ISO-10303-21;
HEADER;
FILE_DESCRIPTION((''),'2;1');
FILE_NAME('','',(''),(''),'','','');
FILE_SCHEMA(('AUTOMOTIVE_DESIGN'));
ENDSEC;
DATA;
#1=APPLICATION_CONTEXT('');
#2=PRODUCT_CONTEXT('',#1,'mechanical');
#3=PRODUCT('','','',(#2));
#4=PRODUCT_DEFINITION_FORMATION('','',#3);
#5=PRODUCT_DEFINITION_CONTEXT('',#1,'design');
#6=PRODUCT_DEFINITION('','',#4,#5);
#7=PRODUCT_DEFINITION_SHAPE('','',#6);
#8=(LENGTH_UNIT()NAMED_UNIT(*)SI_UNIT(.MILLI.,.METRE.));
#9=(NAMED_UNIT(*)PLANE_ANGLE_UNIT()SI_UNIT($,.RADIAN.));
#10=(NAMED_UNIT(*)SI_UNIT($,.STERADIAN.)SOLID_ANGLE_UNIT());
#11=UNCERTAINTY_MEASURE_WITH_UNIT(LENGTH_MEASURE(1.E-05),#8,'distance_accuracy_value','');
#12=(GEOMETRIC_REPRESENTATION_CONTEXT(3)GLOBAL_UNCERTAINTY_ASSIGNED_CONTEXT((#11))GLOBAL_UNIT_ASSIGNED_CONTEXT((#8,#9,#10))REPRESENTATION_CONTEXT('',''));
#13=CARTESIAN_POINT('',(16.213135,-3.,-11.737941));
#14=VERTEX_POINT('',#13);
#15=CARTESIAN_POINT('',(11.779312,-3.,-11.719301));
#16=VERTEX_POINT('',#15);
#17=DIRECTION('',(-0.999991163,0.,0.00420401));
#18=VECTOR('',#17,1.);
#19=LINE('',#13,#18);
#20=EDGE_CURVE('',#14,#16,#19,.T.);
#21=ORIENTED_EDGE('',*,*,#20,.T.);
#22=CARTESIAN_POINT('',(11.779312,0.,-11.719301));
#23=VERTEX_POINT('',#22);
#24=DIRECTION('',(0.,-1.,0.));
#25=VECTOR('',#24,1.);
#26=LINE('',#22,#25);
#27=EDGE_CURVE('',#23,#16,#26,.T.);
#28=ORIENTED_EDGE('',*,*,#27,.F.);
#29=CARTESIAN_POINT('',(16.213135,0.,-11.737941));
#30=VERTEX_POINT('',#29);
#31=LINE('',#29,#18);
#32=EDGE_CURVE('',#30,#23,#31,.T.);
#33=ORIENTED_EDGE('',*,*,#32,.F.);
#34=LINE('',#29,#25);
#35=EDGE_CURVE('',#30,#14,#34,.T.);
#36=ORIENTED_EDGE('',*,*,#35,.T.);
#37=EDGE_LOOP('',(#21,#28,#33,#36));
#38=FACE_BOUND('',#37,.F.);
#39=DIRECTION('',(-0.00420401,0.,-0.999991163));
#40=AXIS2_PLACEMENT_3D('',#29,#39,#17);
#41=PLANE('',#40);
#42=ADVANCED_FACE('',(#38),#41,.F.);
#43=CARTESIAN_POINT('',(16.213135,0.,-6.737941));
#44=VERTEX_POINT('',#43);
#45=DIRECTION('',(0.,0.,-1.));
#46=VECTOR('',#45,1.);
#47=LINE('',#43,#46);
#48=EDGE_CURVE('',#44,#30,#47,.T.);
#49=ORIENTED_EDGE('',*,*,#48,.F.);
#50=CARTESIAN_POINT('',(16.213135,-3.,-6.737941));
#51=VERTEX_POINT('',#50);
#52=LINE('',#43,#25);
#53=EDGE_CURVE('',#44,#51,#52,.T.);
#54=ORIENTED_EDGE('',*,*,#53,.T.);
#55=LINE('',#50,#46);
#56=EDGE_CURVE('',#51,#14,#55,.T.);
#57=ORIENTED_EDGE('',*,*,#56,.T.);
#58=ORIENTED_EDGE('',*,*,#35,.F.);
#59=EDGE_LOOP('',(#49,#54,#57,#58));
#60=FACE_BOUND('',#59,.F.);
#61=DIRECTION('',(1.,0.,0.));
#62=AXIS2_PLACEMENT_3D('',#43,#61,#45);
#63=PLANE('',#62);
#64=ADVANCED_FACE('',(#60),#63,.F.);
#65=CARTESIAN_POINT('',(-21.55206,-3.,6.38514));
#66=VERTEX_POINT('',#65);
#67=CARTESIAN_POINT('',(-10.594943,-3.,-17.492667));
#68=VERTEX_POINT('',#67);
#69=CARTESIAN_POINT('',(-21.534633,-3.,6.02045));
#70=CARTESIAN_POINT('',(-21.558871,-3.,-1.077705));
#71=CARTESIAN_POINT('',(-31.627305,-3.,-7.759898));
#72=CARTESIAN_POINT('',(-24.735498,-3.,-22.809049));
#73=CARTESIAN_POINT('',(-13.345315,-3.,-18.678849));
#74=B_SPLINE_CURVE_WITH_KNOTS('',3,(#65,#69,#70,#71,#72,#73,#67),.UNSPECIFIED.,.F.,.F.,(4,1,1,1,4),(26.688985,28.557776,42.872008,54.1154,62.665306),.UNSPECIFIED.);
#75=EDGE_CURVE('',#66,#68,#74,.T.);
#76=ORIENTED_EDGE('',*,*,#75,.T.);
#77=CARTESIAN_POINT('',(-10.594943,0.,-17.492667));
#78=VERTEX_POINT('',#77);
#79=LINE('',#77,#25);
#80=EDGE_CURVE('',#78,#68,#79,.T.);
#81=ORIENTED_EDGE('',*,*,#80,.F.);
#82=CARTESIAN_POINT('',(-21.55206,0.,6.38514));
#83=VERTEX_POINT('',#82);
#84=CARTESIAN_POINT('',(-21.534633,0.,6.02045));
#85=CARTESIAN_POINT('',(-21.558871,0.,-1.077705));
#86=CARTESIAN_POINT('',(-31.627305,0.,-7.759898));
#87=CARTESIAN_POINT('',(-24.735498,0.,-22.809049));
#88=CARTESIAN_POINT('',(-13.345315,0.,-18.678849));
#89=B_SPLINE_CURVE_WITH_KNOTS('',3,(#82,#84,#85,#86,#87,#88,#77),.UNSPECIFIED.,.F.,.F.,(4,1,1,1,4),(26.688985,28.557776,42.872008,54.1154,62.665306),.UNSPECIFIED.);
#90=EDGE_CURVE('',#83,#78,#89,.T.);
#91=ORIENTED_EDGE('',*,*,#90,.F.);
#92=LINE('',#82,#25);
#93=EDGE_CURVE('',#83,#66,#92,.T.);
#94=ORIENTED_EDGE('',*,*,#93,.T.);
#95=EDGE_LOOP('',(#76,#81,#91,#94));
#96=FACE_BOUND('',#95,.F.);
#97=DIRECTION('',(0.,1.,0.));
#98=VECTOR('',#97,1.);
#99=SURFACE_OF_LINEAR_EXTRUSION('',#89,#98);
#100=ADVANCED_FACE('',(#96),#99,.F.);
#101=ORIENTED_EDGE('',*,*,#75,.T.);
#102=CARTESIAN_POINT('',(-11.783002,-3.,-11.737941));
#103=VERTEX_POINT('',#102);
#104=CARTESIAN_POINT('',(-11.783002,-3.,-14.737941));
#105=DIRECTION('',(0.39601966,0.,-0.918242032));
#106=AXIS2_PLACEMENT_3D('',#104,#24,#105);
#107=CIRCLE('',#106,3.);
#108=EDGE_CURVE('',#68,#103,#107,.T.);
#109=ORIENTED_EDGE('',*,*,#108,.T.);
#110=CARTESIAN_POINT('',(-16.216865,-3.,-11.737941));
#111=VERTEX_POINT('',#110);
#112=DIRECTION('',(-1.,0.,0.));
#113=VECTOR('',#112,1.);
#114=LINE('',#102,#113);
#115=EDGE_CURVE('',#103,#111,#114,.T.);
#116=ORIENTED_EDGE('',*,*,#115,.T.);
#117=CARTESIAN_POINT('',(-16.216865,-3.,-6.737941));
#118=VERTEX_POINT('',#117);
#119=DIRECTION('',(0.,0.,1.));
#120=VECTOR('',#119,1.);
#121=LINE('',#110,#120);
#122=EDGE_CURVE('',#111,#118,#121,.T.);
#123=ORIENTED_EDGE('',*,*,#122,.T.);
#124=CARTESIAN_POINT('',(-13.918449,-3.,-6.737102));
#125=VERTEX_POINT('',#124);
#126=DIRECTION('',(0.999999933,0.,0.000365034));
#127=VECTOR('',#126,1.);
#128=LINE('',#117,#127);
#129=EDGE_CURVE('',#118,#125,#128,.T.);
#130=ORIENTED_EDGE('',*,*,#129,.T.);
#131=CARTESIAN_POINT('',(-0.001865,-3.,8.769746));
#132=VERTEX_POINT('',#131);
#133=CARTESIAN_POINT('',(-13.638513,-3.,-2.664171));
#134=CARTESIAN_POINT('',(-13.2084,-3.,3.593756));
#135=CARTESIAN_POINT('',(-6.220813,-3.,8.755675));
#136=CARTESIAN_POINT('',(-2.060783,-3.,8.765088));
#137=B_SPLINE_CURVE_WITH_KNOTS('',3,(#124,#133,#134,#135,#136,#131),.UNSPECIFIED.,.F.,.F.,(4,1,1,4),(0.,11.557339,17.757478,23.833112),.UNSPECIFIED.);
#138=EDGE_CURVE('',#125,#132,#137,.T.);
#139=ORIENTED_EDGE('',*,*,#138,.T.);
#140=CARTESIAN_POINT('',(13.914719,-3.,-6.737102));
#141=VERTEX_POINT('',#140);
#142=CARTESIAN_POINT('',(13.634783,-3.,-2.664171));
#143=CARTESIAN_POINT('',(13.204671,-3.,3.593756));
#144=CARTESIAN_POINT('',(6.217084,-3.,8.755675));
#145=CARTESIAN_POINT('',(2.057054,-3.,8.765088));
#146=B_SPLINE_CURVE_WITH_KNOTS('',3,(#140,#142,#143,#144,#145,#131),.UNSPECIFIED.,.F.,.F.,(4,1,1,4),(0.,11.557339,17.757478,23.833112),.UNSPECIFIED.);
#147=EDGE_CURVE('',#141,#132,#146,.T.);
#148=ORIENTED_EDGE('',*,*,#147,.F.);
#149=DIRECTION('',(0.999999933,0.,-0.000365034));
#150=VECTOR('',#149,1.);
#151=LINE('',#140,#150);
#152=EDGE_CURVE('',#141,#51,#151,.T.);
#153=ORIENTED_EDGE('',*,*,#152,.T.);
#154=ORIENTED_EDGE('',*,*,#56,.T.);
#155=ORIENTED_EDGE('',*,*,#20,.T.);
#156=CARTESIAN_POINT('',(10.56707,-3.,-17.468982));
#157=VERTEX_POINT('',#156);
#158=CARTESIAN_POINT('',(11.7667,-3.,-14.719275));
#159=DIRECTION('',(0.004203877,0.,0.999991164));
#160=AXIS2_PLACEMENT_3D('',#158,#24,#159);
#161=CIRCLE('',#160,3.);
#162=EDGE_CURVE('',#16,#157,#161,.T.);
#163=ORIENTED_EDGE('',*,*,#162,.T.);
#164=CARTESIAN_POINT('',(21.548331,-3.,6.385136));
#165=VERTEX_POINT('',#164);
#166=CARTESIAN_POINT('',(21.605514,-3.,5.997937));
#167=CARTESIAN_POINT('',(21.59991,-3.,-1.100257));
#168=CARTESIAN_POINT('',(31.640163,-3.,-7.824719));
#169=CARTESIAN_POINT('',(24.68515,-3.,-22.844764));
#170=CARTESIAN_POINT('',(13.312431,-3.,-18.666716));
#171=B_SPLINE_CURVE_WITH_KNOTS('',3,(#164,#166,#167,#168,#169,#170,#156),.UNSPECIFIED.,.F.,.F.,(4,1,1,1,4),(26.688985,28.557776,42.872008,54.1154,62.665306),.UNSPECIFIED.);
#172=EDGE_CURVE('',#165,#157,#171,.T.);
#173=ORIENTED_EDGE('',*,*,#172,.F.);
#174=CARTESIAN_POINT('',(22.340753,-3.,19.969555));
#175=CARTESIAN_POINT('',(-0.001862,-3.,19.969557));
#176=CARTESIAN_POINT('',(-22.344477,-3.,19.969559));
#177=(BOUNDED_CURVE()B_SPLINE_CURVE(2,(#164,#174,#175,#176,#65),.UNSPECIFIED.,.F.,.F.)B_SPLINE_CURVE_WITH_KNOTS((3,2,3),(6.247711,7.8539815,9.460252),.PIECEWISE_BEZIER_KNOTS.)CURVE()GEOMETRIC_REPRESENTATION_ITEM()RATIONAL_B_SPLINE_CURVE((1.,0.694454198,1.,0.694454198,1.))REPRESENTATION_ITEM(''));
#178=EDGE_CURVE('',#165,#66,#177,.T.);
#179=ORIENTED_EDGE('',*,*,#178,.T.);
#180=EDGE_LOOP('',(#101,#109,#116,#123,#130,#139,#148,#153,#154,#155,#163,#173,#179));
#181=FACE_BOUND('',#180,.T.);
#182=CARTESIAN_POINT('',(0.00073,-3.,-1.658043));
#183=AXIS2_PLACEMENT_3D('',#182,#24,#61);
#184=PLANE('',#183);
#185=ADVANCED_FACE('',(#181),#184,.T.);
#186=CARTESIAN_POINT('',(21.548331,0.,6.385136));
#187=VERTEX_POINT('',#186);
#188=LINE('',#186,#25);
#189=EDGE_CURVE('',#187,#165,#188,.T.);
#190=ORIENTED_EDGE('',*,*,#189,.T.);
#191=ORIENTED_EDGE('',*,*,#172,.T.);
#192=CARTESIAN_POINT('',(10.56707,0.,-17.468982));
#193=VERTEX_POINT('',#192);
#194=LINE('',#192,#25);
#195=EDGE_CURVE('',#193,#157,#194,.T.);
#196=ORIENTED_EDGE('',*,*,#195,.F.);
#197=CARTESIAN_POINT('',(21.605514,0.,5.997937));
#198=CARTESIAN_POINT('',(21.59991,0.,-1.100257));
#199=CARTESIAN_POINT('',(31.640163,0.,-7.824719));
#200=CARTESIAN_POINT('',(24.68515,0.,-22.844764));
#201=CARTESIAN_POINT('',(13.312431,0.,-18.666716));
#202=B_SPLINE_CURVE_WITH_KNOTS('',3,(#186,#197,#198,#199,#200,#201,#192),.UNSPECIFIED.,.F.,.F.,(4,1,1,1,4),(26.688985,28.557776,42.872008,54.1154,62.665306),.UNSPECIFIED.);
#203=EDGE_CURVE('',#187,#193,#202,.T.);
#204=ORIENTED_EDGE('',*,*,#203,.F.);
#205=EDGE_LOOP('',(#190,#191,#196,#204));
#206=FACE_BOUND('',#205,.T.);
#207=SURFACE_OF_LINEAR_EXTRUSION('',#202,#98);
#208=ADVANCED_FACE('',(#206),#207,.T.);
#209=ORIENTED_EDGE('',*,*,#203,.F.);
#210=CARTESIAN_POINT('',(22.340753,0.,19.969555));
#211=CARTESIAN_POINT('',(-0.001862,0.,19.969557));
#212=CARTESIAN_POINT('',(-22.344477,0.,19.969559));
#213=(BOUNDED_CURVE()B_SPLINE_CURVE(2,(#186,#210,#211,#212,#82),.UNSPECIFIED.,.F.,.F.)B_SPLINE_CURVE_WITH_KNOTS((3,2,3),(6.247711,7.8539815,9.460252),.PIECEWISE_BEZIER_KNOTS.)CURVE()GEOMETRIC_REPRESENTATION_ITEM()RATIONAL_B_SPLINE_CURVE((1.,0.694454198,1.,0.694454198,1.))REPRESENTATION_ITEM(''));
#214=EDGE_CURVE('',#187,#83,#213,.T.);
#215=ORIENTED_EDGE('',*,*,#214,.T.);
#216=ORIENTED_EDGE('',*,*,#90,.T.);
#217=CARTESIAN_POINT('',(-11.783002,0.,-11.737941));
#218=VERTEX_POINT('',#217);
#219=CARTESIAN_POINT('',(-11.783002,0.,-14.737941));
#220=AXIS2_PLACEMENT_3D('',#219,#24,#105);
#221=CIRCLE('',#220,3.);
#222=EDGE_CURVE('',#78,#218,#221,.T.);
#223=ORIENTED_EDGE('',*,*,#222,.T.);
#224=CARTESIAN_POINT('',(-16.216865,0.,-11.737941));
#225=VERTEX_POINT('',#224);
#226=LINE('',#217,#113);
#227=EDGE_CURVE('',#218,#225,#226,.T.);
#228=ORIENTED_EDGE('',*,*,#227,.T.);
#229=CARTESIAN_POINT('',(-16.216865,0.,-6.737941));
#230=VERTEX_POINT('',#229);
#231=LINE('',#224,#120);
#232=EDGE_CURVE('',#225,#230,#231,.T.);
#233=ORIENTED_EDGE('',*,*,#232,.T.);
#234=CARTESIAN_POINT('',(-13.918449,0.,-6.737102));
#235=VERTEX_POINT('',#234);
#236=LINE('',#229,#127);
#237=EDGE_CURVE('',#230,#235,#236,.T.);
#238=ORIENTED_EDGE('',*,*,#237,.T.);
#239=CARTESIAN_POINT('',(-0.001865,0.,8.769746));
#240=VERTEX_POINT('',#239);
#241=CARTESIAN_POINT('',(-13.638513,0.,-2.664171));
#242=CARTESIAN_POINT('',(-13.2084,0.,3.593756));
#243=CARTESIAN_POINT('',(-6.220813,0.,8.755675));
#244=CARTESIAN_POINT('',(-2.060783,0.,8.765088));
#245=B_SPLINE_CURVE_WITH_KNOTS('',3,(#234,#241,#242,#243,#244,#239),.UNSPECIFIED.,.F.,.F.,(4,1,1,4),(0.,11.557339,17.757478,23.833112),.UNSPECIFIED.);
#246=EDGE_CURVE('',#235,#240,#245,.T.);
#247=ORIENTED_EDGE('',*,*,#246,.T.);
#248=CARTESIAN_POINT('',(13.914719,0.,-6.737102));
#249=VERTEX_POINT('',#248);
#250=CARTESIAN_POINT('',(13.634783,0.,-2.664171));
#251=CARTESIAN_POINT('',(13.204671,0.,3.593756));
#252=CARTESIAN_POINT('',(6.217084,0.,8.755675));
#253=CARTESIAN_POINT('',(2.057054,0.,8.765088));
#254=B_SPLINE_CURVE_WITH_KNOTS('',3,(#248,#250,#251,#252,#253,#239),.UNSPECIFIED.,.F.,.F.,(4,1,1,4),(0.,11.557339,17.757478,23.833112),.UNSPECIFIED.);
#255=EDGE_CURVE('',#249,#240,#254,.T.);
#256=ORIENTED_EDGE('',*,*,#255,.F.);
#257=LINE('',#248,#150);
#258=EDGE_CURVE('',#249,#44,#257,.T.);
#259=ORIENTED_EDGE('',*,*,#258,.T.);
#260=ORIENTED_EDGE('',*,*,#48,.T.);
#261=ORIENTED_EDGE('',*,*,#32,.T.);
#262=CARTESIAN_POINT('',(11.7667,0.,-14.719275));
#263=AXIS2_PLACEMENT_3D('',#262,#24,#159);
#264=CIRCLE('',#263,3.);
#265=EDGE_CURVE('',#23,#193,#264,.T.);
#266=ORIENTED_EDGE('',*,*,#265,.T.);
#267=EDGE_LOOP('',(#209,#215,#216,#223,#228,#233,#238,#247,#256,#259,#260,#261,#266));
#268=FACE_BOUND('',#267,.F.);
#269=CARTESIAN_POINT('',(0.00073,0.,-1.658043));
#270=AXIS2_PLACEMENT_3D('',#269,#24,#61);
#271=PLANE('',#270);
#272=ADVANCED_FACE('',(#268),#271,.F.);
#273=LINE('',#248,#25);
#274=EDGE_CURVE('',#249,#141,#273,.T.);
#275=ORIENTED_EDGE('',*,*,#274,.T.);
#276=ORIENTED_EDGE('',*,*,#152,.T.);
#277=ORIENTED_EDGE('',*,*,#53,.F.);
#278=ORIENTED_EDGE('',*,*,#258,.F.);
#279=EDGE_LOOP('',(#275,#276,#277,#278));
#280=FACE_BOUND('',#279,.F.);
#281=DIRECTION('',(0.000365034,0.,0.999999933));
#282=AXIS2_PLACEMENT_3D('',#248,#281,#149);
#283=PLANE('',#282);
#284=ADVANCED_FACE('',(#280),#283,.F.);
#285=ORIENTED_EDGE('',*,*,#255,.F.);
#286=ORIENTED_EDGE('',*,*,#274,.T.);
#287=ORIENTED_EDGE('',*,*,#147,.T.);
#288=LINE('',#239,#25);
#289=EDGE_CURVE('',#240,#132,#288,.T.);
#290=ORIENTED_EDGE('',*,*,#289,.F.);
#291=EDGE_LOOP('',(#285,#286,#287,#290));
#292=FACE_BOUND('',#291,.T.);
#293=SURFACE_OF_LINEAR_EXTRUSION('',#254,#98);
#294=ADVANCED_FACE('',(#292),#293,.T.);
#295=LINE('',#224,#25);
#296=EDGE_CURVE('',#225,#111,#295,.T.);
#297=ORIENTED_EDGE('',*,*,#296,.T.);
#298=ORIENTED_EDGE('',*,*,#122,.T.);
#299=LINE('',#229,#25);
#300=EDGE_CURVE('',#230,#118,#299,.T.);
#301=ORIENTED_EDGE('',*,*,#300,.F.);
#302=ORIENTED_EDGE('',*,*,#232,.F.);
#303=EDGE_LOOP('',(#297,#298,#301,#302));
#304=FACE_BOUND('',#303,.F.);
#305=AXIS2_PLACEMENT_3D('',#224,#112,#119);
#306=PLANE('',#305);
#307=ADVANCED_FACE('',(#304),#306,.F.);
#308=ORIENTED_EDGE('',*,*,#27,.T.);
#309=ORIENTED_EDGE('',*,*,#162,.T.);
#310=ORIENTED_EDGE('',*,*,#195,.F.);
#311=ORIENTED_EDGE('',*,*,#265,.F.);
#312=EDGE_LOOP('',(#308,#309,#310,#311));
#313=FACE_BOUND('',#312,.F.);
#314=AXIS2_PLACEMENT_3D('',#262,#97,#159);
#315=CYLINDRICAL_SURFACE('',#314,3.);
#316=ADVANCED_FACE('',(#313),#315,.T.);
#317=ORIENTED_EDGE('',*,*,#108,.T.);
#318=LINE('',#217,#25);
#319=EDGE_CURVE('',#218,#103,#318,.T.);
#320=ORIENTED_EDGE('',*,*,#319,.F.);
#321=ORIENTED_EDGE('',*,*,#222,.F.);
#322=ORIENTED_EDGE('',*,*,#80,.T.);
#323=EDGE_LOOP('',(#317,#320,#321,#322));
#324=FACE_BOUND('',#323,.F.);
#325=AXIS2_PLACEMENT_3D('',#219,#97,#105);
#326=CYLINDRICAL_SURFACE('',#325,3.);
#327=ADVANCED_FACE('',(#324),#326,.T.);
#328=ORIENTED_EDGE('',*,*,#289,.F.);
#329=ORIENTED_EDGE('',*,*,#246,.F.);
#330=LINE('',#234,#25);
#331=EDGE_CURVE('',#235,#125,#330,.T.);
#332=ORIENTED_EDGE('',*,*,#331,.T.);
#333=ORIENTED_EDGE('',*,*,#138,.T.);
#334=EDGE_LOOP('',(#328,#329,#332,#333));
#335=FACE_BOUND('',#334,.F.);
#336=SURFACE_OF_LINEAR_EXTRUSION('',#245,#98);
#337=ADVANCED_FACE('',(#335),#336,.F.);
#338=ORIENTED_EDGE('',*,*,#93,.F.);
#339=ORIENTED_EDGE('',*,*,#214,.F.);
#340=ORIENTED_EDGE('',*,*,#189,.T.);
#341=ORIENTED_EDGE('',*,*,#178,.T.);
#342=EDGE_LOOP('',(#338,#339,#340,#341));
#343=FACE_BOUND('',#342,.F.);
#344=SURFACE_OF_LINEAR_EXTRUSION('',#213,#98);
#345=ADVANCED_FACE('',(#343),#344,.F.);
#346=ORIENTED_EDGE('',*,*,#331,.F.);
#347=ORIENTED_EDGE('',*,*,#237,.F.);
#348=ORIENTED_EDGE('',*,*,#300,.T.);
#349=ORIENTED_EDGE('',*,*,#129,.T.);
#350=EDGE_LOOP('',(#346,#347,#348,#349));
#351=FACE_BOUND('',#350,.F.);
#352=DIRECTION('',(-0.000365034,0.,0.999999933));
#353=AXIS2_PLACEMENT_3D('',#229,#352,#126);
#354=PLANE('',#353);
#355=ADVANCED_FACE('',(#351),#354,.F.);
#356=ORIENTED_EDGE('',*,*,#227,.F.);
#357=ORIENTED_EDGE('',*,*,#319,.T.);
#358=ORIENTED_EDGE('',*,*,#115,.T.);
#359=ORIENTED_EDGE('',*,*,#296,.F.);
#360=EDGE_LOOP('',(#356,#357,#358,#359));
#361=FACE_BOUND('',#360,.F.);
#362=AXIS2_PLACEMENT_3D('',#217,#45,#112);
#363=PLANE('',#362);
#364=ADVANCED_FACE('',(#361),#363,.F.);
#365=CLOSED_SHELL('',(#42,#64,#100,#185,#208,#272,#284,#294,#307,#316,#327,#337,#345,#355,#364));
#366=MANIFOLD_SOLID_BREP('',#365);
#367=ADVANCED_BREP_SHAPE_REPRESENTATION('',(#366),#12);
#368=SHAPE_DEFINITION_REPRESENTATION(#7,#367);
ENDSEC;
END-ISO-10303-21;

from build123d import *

# Parameters (mm, degrees)
F1_DEPTH = 3


# Not quite as in the source:
# - ends of sketch curves that miss each other by under 0.0002 mm in the source are joined
# - the dataset's text gives a spline's control points without its knots; the knots are read off the source's solid


with BuildPart() as f1:
    # F0 (on Front) → F1 (new body)
    with BuildSketch(Plane.XZ):
        with BuildLine():
            Line((-11.783002, -11.737941), (-16.216865, -11.737941))
            Line((-16.216865, -11.737941), (-16.216865, -6.737941))
            Line((-16.216865, -6.737941), (-13.918449, -6.737102))
            add(Edge.make_bspline(
                [(-13.918449, -6.737102), (-13.638513, -2.664171), (-13.2084, 3.593756), (-6.220813, 8.755675), (-2.060783, 8.765088), (-0.001865, 8.769746)],
                knots=[0, 0, 0, 0, 11.557339, 17.757478, 23.833112, 23.833112, 23.833112, 23.833112], degree=3))
            add(Edge.make_bspline(
                [(13.914719, -6.737102), (13.634783, -2.664171), (13.204671, 3.593756), (6.217084, 8.755675), (2.057054, 8.765088), (-0.001865, 8.769746)],
                knots=[0, 0, 0, 0, 11.557339, 17.757478, 23.833112, 23.833112, 23.833112, 23.833112], degree=3))
            Line((13.914719, -6.737102), (16.213135, -6.737941))
            Line((16.213135, -6.737941), (16.213135, -11.737941))
            Line((16.213135, -11.737941), (11.779312, -11.719301))
            ThreePointArc((11.779312, -11.719301), (8.8312342753, -14.1003719552), (10.5670700482, -17.4689818896))
            add(Edge.make_bspline(
                [(21.548331, 6.385136), (21.605514, 5.997937), (21.59991, -1.100257), (31.640163, -7.824719), (24.68515, -22.844764), (13.312431, -18.666716), (10.5670700482, -17.4689818896)],
                knots=[26.688985, 26.688985, 26.688985, 26.688985, 28.557776, 42.872008, 54.1154, 62.665306, 62.665306, 62.665306, 62.665306], degree=3))
            add(Edge.make_bspline(
                [(21.548331, 6.385136), (22.3407527768, 19.9695551789), (-0.001862111, 19.969557), (-22.3444769988, 19.9695588211), (-21.5520604233, 6.3851402115)],
                knots=[6.247711, 6.247711, 6.247711, 7.8539815, 7.8539815, 9.460252, 9.460252, 9.460252], degree=2, weights=[1, 0.6944541981, 1, 0.6944541981, 1]))
            add(Edge.make_bspline(
                [(-21.5520604233, 6.3851402115), (-21.534633, 6.02045), (-21.558871, -1.077705), (-31.627305, -7.759898), (-24.735498, -22.809049), (-13.345315, -18.678849), (-10.594943, -17.492667)],
                knots=[26.688985, 26.688985, 26.688985, 26.688985, 28.557776, 42.872008, 54.1154, 62.665306, 62.665306, 62.665306, 62.665306], degree=3))
            ThreePointArc((-10.594943, -17.492667), (-8.8449602866, -14.1313844153), (-11.783002, -11.737941))
        make_face()
    extrude(amount=F1_DEPTH)


solid = f1.part
